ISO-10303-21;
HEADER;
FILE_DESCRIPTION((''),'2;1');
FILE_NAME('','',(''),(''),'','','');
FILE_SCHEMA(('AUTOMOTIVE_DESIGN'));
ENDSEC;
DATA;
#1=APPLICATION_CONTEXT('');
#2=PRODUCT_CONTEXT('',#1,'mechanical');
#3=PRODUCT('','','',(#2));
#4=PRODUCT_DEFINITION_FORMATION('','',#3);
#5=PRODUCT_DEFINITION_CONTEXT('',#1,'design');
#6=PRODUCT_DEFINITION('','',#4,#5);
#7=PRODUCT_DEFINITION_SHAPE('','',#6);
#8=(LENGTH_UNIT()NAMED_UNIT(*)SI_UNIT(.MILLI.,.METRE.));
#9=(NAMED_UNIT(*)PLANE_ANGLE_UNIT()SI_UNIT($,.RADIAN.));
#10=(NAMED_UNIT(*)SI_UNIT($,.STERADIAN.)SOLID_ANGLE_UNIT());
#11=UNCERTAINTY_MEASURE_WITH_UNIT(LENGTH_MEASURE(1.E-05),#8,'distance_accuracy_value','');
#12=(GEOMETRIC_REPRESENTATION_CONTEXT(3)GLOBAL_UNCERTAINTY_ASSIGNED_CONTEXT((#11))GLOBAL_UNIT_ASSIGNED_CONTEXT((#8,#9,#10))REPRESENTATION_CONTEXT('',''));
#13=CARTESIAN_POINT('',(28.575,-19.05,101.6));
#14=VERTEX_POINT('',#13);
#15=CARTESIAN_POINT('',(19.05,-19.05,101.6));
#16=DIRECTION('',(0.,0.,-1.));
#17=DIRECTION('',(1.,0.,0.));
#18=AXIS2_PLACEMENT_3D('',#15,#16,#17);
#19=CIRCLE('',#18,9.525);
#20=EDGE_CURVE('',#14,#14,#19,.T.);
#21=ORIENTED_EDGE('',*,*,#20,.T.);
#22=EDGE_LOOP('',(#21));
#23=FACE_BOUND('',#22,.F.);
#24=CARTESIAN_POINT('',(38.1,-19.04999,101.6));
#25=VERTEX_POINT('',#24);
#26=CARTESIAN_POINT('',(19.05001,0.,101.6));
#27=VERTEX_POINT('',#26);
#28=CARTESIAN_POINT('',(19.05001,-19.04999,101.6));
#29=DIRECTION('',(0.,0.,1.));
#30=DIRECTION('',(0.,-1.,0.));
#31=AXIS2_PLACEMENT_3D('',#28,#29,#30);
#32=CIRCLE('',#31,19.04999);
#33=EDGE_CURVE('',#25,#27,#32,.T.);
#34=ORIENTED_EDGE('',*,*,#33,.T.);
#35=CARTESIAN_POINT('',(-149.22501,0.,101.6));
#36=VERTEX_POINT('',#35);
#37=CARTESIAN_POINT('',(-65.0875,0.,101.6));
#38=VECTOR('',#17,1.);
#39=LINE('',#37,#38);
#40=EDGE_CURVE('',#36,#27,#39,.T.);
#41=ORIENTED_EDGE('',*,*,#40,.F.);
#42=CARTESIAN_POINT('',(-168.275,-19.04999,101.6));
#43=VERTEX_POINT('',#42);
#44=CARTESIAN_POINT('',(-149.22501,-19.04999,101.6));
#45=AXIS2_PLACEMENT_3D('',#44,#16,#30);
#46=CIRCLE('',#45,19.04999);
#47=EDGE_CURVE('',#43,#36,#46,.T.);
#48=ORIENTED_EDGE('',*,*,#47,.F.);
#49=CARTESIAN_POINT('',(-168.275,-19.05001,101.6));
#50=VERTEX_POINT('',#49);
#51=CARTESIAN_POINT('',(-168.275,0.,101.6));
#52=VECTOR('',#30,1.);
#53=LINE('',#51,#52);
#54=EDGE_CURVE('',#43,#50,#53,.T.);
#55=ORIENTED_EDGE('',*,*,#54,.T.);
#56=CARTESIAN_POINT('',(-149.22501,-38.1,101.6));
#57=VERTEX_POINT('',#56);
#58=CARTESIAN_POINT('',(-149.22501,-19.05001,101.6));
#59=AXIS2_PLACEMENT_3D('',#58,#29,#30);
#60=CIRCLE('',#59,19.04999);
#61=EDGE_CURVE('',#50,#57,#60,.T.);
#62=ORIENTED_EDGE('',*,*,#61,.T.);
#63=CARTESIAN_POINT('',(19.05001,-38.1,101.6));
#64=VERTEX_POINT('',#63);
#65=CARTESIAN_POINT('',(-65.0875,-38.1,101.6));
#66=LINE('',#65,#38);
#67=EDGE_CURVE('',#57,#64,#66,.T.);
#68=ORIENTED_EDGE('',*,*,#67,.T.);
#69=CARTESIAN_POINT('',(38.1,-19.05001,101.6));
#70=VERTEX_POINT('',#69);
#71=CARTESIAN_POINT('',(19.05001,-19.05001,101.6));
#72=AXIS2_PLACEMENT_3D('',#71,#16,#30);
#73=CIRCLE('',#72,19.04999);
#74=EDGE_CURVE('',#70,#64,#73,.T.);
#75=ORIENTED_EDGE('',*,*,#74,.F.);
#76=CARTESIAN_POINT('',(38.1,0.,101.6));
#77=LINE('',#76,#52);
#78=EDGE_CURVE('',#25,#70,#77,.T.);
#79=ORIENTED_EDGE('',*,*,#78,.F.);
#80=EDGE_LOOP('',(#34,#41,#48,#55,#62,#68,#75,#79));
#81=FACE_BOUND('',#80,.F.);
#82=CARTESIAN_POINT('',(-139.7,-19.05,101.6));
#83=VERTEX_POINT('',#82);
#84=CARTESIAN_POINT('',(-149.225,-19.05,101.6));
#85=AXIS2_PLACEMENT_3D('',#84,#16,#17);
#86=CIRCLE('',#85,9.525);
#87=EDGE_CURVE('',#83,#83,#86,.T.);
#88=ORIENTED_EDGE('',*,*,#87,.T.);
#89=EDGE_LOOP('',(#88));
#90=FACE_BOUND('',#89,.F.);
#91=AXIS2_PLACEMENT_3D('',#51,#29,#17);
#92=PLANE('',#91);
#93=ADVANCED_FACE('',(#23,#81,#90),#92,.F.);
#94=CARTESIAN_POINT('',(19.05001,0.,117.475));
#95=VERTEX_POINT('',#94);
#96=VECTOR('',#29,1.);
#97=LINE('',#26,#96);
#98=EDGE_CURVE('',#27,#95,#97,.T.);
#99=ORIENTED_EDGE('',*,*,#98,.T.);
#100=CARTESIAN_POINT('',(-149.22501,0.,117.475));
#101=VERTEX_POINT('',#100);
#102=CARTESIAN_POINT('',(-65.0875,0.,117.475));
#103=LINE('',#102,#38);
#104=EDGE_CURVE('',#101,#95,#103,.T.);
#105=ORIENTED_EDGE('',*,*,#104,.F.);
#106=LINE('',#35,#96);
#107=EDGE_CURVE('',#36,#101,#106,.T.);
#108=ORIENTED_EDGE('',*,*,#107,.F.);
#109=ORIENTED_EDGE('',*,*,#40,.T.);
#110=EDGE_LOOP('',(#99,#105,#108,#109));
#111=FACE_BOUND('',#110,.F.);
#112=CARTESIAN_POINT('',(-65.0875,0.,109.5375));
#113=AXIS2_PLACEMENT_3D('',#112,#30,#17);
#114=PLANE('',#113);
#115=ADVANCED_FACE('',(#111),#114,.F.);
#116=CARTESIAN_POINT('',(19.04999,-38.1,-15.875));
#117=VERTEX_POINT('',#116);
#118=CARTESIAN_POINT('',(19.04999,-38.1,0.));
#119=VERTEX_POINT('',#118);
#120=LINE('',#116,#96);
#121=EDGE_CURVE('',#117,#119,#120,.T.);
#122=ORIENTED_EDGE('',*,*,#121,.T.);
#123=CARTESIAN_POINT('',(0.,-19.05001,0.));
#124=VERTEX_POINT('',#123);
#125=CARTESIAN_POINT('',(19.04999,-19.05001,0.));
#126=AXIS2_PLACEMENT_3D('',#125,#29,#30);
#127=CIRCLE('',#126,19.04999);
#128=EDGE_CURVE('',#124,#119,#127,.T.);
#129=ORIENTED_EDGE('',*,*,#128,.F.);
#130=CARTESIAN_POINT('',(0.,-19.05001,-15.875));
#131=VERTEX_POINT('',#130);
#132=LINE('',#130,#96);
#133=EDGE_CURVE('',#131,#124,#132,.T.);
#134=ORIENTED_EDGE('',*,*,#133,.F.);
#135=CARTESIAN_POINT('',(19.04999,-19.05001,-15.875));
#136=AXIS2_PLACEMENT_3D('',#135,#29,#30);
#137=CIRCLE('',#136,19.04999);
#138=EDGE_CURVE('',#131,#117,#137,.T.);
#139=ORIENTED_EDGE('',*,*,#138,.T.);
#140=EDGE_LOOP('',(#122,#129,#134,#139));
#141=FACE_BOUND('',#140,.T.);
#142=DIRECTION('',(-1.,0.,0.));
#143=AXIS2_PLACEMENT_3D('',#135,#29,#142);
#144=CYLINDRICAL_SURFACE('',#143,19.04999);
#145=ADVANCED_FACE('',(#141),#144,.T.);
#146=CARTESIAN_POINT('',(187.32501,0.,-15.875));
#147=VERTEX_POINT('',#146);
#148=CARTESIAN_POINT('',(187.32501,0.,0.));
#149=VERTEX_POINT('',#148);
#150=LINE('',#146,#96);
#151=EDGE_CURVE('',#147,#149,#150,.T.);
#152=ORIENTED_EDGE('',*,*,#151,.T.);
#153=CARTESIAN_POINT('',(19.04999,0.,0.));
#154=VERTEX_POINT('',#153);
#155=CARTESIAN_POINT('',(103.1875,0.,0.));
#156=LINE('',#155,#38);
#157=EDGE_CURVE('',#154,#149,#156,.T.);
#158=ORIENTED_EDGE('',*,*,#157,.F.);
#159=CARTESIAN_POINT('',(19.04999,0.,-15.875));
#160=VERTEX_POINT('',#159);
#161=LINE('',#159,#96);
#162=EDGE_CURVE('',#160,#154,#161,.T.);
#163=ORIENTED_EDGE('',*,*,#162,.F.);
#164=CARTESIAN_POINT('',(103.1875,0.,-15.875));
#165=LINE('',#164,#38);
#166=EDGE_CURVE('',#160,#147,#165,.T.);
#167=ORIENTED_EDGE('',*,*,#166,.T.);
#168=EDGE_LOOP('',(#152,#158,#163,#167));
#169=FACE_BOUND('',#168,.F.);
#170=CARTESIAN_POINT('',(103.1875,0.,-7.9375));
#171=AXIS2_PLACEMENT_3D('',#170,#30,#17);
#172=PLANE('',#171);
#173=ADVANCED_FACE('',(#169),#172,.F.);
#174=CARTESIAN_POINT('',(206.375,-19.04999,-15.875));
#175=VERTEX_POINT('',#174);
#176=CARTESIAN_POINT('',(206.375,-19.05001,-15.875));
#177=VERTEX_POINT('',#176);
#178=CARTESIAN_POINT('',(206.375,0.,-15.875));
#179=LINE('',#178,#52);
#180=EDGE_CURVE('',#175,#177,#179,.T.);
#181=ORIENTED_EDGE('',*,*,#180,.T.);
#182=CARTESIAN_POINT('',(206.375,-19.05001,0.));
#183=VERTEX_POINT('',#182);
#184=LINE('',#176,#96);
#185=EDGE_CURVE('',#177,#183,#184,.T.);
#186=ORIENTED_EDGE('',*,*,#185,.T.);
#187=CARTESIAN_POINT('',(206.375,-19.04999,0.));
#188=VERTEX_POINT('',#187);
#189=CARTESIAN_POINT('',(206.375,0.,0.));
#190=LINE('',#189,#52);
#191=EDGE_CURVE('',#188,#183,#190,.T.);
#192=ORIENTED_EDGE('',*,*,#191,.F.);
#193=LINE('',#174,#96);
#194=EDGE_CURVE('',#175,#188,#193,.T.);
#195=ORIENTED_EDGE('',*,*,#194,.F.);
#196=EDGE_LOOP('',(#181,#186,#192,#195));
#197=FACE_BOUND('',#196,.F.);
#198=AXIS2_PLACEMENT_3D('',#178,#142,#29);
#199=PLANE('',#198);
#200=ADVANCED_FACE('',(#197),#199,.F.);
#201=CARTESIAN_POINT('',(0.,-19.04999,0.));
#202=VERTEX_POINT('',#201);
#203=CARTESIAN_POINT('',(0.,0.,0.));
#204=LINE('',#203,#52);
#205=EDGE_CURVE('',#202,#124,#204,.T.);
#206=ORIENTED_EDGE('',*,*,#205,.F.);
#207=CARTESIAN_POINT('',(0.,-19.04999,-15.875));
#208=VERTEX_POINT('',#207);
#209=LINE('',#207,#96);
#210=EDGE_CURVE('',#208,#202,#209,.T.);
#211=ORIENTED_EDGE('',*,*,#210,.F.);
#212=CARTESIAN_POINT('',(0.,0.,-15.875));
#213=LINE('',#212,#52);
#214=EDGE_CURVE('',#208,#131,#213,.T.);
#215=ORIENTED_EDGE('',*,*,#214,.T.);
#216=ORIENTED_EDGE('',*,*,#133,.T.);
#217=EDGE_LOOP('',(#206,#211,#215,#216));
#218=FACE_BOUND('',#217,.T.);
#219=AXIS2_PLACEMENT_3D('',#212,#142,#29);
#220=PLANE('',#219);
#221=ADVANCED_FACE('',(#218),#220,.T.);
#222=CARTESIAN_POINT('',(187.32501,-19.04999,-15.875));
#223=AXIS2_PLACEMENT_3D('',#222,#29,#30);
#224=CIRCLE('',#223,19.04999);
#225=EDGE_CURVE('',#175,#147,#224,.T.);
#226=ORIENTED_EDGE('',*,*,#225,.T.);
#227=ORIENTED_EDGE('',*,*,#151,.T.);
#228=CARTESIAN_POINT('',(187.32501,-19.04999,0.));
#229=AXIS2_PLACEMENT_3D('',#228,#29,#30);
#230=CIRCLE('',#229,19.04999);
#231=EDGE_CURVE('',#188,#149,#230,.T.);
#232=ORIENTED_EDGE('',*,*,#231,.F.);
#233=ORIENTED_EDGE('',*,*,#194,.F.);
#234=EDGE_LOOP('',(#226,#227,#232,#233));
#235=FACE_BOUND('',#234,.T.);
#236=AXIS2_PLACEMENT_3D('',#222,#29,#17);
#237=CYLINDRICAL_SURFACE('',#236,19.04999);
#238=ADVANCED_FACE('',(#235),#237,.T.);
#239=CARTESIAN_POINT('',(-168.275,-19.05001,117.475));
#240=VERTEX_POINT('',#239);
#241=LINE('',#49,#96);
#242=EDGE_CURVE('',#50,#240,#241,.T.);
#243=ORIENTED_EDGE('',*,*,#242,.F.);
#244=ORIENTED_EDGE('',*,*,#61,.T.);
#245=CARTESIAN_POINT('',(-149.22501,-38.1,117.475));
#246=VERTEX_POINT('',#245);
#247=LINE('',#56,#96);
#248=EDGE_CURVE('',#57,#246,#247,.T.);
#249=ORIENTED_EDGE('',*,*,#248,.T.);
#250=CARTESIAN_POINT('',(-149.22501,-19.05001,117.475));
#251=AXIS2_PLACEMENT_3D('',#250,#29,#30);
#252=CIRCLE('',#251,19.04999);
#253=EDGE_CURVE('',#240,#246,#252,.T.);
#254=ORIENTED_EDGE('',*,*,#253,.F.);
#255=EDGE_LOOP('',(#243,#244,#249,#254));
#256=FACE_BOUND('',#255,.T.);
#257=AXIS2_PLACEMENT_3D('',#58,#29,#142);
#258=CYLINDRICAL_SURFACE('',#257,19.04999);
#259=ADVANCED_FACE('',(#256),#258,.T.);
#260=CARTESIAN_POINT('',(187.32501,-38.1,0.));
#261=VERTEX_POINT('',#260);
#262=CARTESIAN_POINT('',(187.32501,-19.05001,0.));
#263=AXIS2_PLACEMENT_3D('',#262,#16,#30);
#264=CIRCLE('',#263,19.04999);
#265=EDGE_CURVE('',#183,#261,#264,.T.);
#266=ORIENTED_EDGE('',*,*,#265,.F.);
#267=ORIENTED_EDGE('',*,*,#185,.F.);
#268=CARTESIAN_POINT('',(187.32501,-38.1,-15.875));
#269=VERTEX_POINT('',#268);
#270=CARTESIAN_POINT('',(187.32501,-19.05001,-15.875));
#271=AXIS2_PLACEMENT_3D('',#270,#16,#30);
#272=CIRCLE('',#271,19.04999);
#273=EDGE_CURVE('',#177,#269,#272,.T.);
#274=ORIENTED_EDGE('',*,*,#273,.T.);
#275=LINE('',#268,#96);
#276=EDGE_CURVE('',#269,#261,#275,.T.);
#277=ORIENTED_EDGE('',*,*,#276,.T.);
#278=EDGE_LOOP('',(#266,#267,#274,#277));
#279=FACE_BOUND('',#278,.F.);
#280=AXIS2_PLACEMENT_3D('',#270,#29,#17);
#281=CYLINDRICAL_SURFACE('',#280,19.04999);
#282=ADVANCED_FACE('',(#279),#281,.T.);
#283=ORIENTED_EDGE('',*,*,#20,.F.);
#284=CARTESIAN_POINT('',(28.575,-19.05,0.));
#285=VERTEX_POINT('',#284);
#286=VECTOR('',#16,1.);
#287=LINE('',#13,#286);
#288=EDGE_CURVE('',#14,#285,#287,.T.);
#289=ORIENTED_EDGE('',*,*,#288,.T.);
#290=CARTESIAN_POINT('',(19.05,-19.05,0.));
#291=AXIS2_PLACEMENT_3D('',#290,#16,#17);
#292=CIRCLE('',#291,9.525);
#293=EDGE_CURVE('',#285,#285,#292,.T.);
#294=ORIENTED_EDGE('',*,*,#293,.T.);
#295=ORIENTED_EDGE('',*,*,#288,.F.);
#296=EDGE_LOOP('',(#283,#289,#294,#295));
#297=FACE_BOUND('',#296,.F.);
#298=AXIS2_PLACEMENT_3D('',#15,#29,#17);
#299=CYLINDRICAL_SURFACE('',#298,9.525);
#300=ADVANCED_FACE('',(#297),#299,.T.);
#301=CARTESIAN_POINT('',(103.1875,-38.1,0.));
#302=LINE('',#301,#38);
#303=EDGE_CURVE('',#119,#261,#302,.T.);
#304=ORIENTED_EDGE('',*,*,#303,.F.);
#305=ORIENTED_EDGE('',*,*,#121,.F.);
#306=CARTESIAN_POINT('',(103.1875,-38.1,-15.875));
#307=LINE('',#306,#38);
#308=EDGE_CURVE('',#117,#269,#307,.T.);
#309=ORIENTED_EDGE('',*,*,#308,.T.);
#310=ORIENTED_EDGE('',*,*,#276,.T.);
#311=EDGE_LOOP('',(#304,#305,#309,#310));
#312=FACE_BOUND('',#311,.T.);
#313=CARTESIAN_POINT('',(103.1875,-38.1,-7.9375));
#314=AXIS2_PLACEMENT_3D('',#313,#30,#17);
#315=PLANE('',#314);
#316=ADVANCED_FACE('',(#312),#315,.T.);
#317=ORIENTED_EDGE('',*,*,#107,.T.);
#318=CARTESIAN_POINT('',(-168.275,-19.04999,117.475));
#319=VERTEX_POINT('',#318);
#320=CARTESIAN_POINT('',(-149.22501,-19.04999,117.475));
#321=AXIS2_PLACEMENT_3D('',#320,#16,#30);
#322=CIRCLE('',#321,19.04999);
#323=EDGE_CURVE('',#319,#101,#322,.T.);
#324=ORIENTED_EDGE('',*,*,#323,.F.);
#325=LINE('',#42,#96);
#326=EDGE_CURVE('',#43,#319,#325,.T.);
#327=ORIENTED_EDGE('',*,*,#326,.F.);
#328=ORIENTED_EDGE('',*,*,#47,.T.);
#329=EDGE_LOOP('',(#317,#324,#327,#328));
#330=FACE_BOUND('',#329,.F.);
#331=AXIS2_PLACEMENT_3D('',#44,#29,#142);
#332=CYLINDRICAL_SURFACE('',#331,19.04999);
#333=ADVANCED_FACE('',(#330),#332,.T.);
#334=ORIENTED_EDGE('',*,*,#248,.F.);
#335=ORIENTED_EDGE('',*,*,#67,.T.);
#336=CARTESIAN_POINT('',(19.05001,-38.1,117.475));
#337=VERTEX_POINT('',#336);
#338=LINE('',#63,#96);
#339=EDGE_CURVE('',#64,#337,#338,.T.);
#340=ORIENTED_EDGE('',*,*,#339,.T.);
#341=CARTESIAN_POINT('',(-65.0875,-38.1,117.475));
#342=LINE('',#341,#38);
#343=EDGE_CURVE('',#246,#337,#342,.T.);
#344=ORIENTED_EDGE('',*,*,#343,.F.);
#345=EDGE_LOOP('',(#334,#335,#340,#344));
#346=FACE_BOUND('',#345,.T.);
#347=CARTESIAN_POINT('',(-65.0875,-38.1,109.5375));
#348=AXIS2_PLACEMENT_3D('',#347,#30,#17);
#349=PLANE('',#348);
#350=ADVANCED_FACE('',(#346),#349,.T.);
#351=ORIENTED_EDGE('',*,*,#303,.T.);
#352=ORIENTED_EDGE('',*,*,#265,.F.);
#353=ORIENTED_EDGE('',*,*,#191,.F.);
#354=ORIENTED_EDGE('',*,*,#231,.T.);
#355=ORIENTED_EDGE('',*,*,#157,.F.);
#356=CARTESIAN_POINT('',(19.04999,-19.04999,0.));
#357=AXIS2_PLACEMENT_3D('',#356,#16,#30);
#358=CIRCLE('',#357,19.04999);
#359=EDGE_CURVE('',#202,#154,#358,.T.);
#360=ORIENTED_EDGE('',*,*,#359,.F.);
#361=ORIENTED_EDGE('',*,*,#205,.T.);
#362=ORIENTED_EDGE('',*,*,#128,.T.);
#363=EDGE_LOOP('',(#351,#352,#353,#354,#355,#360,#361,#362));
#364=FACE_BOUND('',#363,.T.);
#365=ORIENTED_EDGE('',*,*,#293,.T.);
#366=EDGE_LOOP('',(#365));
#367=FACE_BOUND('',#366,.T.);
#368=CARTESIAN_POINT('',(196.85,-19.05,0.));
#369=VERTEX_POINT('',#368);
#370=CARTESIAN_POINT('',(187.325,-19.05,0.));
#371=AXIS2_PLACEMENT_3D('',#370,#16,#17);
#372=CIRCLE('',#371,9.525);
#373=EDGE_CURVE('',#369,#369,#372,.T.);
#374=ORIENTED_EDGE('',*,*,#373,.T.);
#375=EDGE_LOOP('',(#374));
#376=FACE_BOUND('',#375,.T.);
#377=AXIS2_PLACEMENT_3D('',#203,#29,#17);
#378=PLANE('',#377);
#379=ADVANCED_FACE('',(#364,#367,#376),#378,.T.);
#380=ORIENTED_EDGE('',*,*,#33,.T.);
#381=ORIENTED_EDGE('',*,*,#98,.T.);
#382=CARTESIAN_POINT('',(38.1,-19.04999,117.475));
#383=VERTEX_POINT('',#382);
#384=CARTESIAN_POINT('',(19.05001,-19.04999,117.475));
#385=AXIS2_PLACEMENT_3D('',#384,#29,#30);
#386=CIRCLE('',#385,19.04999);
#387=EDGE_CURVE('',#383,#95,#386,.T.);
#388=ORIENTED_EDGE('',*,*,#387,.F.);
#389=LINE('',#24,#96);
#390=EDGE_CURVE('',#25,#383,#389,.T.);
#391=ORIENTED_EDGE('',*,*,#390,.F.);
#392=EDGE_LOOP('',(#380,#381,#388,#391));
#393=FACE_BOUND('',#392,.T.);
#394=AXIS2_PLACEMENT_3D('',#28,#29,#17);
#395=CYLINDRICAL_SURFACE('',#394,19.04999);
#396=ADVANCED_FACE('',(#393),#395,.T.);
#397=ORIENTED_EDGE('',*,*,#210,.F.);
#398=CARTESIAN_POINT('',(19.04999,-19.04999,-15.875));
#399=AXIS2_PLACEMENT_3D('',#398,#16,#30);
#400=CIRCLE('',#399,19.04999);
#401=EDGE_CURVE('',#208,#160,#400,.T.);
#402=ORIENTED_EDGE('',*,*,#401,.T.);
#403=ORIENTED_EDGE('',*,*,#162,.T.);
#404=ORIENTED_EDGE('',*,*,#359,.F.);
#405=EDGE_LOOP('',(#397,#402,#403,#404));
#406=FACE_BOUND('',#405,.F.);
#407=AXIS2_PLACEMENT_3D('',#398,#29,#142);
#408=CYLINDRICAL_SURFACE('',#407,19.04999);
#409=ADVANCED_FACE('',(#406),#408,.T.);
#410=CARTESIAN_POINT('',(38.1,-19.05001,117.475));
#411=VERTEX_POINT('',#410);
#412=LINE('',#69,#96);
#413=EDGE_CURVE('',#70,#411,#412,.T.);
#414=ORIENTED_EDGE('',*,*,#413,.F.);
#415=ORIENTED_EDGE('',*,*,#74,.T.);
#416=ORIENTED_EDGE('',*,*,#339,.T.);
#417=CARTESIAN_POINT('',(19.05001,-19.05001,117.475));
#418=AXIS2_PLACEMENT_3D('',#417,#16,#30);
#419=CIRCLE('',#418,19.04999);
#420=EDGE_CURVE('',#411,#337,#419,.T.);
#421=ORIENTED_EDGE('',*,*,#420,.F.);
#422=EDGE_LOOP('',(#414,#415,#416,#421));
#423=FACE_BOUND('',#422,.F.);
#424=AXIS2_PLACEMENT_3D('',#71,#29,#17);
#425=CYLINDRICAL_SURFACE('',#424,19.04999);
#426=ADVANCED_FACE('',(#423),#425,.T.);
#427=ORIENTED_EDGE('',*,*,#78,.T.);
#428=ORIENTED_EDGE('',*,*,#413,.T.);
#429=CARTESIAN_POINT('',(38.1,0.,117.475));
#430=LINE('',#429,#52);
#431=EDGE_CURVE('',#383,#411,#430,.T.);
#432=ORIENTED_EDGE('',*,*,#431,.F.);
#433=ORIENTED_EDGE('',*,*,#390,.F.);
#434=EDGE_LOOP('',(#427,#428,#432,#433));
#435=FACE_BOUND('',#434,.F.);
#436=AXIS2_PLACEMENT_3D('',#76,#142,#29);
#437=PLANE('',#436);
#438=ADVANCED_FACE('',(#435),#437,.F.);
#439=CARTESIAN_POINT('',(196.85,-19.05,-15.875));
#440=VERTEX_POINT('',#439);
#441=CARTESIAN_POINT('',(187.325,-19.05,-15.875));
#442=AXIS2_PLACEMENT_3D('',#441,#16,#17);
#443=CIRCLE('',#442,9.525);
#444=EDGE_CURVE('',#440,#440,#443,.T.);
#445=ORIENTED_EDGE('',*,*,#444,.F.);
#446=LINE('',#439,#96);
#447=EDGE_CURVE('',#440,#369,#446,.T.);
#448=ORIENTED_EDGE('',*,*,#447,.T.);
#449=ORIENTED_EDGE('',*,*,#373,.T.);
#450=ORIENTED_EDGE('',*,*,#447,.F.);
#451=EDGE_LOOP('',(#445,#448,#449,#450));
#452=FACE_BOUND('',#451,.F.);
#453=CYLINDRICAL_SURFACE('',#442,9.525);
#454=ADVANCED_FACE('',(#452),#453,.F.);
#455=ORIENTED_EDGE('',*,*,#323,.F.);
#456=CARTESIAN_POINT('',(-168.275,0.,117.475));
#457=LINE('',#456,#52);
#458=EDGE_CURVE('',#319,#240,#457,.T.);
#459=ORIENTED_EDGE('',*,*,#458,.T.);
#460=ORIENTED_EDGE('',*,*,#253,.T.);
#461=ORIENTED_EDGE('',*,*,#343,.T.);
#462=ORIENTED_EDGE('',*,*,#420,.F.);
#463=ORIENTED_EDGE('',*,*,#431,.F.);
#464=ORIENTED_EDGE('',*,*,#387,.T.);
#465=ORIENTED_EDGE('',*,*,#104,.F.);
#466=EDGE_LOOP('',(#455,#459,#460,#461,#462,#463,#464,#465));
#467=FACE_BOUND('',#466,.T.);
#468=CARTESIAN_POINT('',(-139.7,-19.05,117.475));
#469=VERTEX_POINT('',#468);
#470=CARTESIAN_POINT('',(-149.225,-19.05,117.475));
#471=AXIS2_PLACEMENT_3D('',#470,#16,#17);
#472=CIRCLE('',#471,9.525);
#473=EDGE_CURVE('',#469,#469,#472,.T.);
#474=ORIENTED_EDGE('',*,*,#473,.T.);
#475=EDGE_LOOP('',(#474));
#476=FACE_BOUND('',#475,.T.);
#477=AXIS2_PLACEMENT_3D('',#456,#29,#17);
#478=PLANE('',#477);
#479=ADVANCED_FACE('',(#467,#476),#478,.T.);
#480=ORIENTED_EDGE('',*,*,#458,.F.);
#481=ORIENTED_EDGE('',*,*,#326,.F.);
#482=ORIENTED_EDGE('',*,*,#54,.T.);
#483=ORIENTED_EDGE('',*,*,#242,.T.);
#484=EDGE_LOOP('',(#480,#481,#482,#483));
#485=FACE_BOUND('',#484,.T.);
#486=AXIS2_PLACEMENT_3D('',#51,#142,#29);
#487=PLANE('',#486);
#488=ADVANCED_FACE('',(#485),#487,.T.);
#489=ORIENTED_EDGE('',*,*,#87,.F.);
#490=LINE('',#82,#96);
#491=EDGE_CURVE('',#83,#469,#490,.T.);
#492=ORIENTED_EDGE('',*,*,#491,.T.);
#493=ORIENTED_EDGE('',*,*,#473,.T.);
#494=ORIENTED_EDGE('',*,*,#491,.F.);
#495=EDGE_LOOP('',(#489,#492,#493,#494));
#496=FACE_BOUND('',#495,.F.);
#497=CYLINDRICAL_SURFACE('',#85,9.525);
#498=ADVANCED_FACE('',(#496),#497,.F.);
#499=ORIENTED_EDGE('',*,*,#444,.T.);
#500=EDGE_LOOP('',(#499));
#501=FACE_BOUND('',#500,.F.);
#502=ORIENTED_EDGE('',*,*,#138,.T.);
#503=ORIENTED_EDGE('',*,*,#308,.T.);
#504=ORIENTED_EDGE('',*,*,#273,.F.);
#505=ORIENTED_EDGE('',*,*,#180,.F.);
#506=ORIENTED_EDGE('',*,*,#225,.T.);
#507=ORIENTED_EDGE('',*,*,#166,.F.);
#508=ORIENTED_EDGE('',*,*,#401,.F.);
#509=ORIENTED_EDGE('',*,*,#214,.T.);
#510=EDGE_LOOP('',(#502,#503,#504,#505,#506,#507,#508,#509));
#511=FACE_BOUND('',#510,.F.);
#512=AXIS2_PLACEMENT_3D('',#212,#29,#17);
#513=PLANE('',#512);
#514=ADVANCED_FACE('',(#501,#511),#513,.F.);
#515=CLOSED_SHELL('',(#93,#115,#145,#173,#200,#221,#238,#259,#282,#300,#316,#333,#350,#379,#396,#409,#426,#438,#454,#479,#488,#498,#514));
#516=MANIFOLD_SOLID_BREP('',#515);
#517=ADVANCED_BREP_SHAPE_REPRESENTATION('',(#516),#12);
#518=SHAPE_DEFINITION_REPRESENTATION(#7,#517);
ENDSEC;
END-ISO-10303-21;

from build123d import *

# Parameters (mm, degrees)
F0_W     = 206.375
F0_H     = 15.875
F1_DEPTH = 38.1
F2_R     = 19.04999
F3_R     = 19.04999
F4_R     = 9.525
F5_DEPTH = 101.6
F6_R     = 9.525
F7_DEPTH = 25.4
F8_R     = 9.525
F9_DEPTH = 25.4


# Not quite as in the source:
# - a fillet or chamfer is up to 0.001 mm smaller than in the source, because OpenCascade refuses the exact size


with BuildPart() as f1:
    # F0 (on Front) → F1 (new body)
    with BuildSketch(Plane.XZ):
        with Locations((103.1875, -7.9375)):
            Rectangle(F0_W, F0_H)
    extrude(amount=F1_DEPTH)

    # F3 (radius 19.05 in the source; OpenCascade refuses exactly that, so slightly less here)
    f3_edges = [f1.edges().sort_by_distance(p)[0] for p in [
        (0, -38.1, -7.9375),
        (206.375, -38.1, -7.9375),
        (206.375, 0, -7.9375),
        (0, 0, -7.9375),
    ]]
    fillet(f3_edges, radius=F3_R)



with BuildPart() as f1b:
    # F0 (on Front) → F1, piece 2 (new body)
    with BuildSketch(Plane.XZ):
        with Locations((-65.0875, 109.5375)):
            Rectangle(F0_W, F0_H)
    extrude(amount=F1_DEPTH)

    # F2 (radius 19.05 in the source; OpenCascade refuses exactly that, so slightly less here)
    f2_edges = [f1b.edges().sort_by_distance(p)[0] for p in [
        (-168.275, -38.1, 109.5375),
        (-168.275, 0, 109.5375),
        (38.1, -38.1, 109.5375),
        (38.1, 0, 109.5375),
    ]]
    fillet(f2_edges, radius=F2_R)


with BuildPart() as f1_1:
    add(f1.part)

    add(f1b.part)  # F5 merges F1b
    # F4 (on face) → F5 (join)
    with BuildSketch(Plane(origin=(0, 0, 101.6), x_dir=(1, 0, 0), z_dir=(0, 0, -1))):
        with Locations((19.05, 19.05)):
            Circle(F4_R)
    extrude(amount=F5_DEPTH)

    # F6 (on face) → F7 (cut)
    with BuildSketch(Plane(origin=(0, 0, 101.6), x_dir=(1, 0, 0), z_dir=(0, 0, -1))):
        with Locations((-149.225, 19.05)):
            Circle(F6_R)
    extrude(amount=-F7_DEPTH, mode=Mode.SUBTRACT)

    # F8 (on face) → F9 (cut)
    with BuildSketch(Plane(origin=(0, 0, -15.875), x_dir=(1, 0, 0), z_dir=(0, 0, -1))):
        with Locations((187.325, 19.05)):
            Circle(F8_R)
    extrude(amount=-F9_DEPTH, mode=Mode.SUBTRACT)


solid = f1_1.part
